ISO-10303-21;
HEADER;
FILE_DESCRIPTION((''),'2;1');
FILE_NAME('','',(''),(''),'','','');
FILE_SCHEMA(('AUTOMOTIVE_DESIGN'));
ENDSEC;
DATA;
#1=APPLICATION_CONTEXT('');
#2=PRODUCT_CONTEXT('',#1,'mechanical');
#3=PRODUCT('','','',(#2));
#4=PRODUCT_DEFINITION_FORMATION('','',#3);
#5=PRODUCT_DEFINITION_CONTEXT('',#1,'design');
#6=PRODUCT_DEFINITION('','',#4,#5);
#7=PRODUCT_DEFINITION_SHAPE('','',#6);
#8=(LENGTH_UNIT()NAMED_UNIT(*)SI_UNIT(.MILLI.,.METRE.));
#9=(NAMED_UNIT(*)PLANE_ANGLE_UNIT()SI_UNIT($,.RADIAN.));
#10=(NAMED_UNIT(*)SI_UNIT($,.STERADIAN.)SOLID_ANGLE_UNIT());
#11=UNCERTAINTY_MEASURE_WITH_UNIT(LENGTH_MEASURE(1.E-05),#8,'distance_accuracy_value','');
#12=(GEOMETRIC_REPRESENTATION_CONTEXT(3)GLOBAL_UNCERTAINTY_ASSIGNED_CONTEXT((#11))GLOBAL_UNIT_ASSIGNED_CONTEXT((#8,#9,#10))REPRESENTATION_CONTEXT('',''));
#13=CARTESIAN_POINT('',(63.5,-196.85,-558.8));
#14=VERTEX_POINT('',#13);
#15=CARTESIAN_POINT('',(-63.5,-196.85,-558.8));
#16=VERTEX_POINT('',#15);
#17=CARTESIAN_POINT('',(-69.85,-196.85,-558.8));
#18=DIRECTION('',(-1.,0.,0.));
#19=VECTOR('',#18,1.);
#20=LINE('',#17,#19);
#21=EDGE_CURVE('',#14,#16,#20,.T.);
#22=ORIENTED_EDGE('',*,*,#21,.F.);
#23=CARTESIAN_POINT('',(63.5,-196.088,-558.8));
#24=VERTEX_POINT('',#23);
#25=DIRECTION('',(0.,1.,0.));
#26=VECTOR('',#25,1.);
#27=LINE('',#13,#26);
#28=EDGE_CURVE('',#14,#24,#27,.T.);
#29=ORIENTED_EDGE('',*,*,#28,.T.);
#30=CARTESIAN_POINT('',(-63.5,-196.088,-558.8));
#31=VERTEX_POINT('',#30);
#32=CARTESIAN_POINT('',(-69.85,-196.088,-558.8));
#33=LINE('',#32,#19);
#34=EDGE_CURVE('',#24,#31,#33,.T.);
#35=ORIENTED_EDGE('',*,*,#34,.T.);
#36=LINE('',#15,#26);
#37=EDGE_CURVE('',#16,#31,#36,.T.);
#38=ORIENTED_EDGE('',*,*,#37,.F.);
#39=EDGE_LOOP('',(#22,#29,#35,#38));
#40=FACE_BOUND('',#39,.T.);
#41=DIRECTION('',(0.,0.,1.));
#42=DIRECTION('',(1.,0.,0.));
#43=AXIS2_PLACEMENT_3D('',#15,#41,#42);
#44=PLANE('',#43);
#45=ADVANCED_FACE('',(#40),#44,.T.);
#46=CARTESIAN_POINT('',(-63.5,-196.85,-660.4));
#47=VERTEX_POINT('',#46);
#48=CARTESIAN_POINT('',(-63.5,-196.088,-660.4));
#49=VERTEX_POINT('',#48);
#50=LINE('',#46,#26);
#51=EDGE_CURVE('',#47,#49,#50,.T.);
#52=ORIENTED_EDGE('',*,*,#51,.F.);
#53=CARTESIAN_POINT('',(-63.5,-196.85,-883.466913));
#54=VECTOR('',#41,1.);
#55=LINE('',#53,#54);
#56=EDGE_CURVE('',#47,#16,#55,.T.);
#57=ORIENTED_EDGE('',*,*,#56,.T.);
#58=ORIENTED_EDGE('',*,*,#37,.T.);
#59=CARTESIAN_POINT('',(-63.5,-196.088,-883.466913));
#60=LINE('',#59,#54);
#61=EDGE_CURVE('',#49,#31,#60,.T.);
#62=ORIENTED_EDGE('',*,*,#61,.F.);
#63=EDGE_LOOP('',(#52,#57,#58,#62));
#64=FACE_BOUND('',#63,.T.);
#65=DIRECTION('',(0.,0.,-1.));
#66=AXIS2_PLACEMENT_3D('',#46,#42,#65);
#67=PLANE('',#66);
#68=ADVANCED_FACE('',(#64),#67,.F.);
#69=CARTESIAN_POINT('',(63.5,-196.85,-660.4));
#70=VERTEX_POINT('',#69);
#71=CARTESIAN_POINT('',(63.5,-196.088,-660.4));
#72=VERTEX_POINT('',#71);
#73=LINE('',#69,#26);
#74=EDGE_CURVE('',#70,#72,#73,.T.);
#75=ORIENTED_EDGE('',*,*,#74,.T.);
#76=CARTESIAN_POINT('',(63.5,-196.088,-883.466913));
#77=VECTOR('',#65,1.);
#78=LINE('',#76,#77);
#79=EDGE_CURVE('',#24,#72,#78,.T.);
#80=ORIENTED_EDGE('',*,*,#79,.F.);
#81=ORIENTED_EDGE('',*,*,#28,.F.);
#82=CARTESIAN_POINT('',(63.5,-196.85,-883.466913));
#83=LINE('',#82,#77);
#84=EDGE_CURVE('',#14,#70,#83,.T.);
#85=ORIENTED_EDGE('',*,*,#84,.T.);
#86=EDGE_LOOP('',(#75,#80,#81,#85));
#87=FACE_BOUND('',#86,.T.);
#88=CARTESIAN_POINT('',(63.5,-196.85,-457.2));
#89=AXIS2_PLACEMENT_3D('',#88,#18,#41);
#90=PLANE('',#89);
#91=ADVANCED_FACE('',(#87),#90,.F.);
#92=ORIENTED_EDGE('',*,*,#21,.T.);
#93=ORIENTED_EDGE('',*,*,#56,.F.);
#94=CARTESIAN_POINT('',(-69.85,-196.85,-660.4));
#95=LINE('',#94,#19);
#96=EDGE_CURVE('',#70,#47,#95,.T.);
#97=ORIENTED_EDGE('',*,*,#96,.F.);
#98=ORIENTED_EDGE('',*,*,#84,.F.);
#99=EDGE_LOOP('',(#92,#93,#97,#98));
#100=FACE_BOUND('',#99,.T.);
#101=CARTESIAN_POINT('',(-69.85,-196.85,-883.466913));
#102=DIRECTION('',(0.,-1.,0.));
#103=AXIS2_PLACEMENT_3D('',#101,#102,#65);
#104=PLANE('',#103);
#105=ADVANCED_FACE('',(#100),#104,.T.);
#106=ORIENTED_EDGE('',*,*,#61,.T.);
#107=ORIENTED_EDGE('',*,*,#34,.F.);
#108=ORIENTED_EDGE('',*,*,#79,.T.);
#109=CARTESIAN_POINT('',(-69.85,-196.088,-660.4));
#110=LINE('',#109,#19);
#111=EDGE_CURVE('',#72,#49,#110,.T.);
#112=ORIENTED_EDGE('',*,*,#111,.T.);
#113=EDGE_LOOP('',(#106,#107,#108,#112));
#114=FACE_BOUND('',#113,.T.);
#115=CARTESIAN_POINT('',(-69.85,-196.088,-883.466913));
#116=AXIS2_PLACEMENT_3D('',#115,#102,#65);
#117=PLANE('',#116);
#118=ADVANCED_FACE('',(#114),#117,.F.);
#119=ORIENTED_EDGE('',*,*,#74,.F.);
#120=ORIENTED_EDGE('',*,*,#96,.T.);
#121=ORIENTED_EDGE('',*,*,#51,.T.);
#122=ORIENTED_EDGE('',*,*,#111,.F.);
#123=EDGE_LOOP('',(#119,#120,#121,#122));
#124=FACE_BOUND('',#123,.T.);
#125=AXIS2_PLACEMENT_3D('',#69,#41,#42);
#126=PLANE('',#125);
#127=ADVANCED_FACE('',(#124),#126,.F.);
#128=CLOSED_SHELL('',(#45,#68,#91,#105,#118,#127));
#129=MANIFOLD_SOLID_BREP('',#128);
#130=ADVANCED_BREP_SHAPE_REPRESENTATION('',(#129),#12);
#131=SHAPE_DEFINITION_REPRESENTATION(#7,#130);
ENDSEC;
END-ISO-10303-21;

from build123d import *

# Parameters (mm, degrees)
BOSS_EXTRUDE1_DEPTH             = 479.425
BOSS_EXTRUDE1_2_DEPTH           = 479.425
SKETCH2_R                       = 1.5875
SKETCH2_W                       = 5.588
SKETCH2_H                       = 25.4
BOSS_EXTRUDE2_DEPTH             = 3.175
SKETCH3_R                       = 1.5875
BOSS_EXTRUDE3_DEPTH             = 3.175
SKETCH4_R                       = 1.5875
BOSS_EXTRUDE4_DEPTH             = 3.175
BOSS_EXTRUDE5_DEPTH             = 3.175
SKETCH6_R                       = 1.5875
BOSS_EXTRUDE6_DEPTH             = 3.175
BOSS_EXTRUDE8_RIGHT_START       = -0.762
SKETCH8_W                       = 3.175
SKETCH8_H                       = 25.4
BOSS_EXTRUDE8_RIGHT_DEPTH       = 5.588
BOSS_EXTRUDE8_LEFT_START        = -189.738
BOSS_EXTRUDE8_LEFT_OUTLINE_W    = 3.175
BOSS_EXTRUDE8_LEFT_OUTLINE_H    = 25.4
BOSS_EXTRUDE8_LEFT_DEPTH        = 5.588
BASE_FLANGE1_DEPTH              = 482.6
BASE_FLANGE2_DEPTH              = 482.6
SKETCH13_W                      = 0.762
SKETCH13_H                      = 63.5
BASE_FLANGE3_DEPTH              = 482.6
HOLE1_START                     = 93
HOLE1_OUTLINE_R                 = 1.7526
HOLE1_DEPTH                     = 3
HOLE1_START_2                   = 88
HOLE1_2_OUTLINE_R               = 1.7526
HOLE1_2_DEPTH                   = 7
SKETCH24_W                      = 1.35255
SKETCH24_H                      = 184.15
F_6_32_TAPPED_HOLE1_AT_2_COUNT  = 2
F_6_32_TAPPED_HOLE1_AT_2_PITCH  = 152.4
F_6_32_TAPPED_HOLE1_AT_3_COUNT  = 2
F_6_32_TAPPED_HOLE1_AT_3_PITCH  = 304.8
F_6_32_TAPPED_HOLE1_AT_4_COUNT  = 2
F_6_32_TAPPED_HOLE1_AT_4_PITCH  = 457.2
HOLE2_START                     = -96
HOLE2_OUTLINE_R                 = 1.7526
HOLE2_DEPTH                     = 192
HOLE2_START_2                   = -95
HOLE2_2_OUTLINE_R               = 1.7526
HOLE2_2_DEPTH                   = 7
HOLE2_START_3                   = 88
HOLE2_3_OUTLINE_R               = 1.7526
HOLE2_3_DEPTH                   = 7
SKETCH26_W                      = 1.35255
SKETCH26_H                      = 184.15
F_6_32_TAPPED_HOLE2_AT_2_COUNT  = 2
F_6_32_TAPPED_HOLE2_AT_2_PITCH  = 50.8
F_6_32_TAPPED_HOLE2_AT_3_COUNT  = 2
F_6_32_TAPPED_HOLE2_AT_3_PITCH  = 101.6
F_6_32_TAPPED_HOLE2_AT_4_COUNT  = 2
F_6_32_TAPPED_HOLE2_AT_4_PITCH  = 152.4
F_6_32_TAPPED_HOLE2_AT_5_COUNT  = 2
F_6_32_TAPPED_HOLE2_AT_5_PITCH  = 203.2
F_6_32_TAPPED_HOLE2_AT_6_COUNT  = 2
F_6_32_TAPPED_HOLE2_AT_6_PITCH  = 254
F_6_32_TAPPED_HOLE2_AT_7_COUNT  = 2
F_6_32_TAPPED_HOLE2_AT_7_PITCH  = 304.8
F_6_32_TAPPED_HOLE2_AT_8_COUNT  = 2
F_6_32_TAPPED_HOLE2_AT_8_PITCH  = 355.6
F_6_32_TAPPED_HOLE2_AT_9_COUNT  = 2
F_6_32_TAPPED_HOLE2_AT_9_PITCH  = 406.4
F_6_32_TAPPED_HOLE2_AT_10_COUNT = 2
F_6_32_TAPPED_HOLE2_AT_10_PITCH = 457.2
SKETCH21_W                      = 1.35255
SKETCH21_H                      = 3.176
F_6_32_TAPPED_HOLE3_AT_2_COUNT  = 2
F_6_32_TAPPED_HOLE3_AT_2_PITCH  = 25.4
F_6_32_TAPPED_HOLE3_AT_3_COUNT  = 2
F_6_32_TAPPED_HOLE3_AT_3_PITCH  = 50.8
F_6_32_TAPPED_HOLE3_AT_4_COUNT  = 2
F_6_32_TAPPED_HOLE3_AT_4_PITCH  = 76.2
F_6_32_TAPPED_HOLE3_AT_5_COUNT  = 2
F_6_32_TAPPED_HOLE3_AT_5_PITCH  = 101.6
F_6_32_TAPPED_HOLE3_AT_6_COUNT  = 2
F_6_32_TAPPED_HOLE3_AT_6_PITCH  = 127
F_6_32_TAPPED_HOLE3_AT_7_COUNT  = 2
F_6_32_TAPPED_HOLE3_AT_7_PITCH  = 203.2
F_6_32_TAPPED_HOLE3_AT_8_COUNT  = 2
F_6_32_TAPPED_HOLE3_AT_8_PITCH  = 152.4
F_6_32_TAPPED_HOLE3_AT_9_COUNT  = 2
F_6_32_TAPPED_HOLE3_AT_9_PITCH  = 177.8
F_6_32_TAPPED_HOLE3_AT_10_COUNT = 2
F_6_32_TAPPED_HOLE3_AT_10_PITCH = 254
F_6_32_TAPPED_HOLE3_AT_11_COUNT = 2
F_6_32_TAPPED_HOLE3_AT_11_PITCH = 279.4
F_6_32_TAPPED_HOLE3_AT_12_COUNT = 2
F_6_32_TAPPED_HOLE3_AT_12_PITCH = 304.8
F_6_32_TAPPED_HOLE3_AT_13_COUNT = 2
F_6_32_TAPPED_HOLE3_AT_13_PITCH = 330.2
F_6_32_TAPPED_HOLE3_AT_14_COUNT = 2
F_6_32_TAPPED_HOLE3_AT_14_PITCH = 355.6
F_6_32_TAPPED_HOLE3_AT_15_COUNT = 2
F_6_32_TAPPED_HOLE3_AT_15_PITCH = 381
F_6_32_TAPPED_HOLE3_AT_16_COUNT = 2
F_6_32_TAPPED_HOLE3_AT_16_PITCH = 406.4
F_6_32_TAPPED_HOLE3_AT_17_COUNT = 2
F_6_32_TAPPED_HOLE3_AT_17_PITCH = 431.8
MIRROR1_COPY_1_SKETCH_W         = 1.35255
MIRROR1_COPY_1_SKETCH_H         = 3.176
MIRROR1_COPY_2_SKETCH_W         = 1.35255
MIRROR1_COPY_2_SKETCH_H         = 3.176
MIRROR1_COPY_3_SKETCH_W         = 1.35255
MIRROR1_COPY_3_SKETCH_H         = 3.176
MIRROR1_COPY_4_SKETCH_W         = 1.35255
MIRROR1_COPY_4_SKETCH_H         = 3.176
MIRROR1_COPY_5_SKETCH_W         = 1.35255
MIRROR1_COPY_5_SKETCH_H         = 3.176
MIRROR1_COPY_6_SKETCH_W         = 1.35255
MIRROR1_COPY_6_SKETCH_H         = 3.176
MIRROR1_COPY_7_SKETCH_W         = 1.35255
MIRROR1_COPY_7_SKETCH_H         = 3.176
MIRROR1_COPY_8_SKETCH_W         = 1.35255
MIRROR1_COPY_8_SKETCH_H         = 3.176
MIRROR1_COPY_9_SKETCH_W         = 1.35255
MIRROR1_COPY_9_SKETCH_H         = 3.176
MIRROR1_COPY_10_SKETCH_W        = 1.35255
MIRROR1_COPY_10_SKETCH_H        = 3.176
MIRROR1_COPY_11_SKETCH_W        = 1.35255
MIRROR1_COPY_11_SKETCH_H        = 3.176
MIRROR1_COPY_12_SKETCH_W        = 1.35255
MIRROR1_COPY_12_SKETCH_H        = 3.176
MIRROR1_COPY_13_SKETCH_W        = 1.35255
MIRROR1_COPY_13_SKETCH_H        = 3.176
MIRROR1_COPY_14_SKETCH_W        = 1.35255
MIRROR1_COPY_14_SKETCH_H        = 3.176
MIRROR1_COPY_15_SKETCH_W        = 1.35255
MIRROR1_COPY_15_SKETCH_H        = 3.176
MIRROR1_COPY_16_SKETCH_W        = 1.35255
MIRROR1_COPY_16_SKETCH_H        = 3.176
SKETCH9_R                       = 1.5875
NOSECONE_BASE_DEPTH             = 3.175
NOSECONE_BASE_DRAFT             = 20
SPLIT1_START                    = -558.8
SPLIT1_DEPTH                    = 361.95
SPLIT1_START_2                  = -679.45
SPLIT1_2_DEPTH                  = 120.65
SPLIT1_3_OUTLINE_W              = 127
SPLIT1_3_OUTLINE_H              = 0.762
SPLIT1_3_DEPTH                  = 19.05


with BuildPart() as part:
    # Sketch1 → Boss-Extrude1 (new body)
    with BuildSketch(Plane.XY.offset(-196.85)):
        Polygon((88.9, -136.525), (85.725, -136.525), (85.725, -114.3), (63.5, -114.3), (63.5, -111.125), (88.9, -111.125), align=None)
    extrude(amount=-BOSS_EXTRUDE1_DEPTH)

    # Sketch24 → #6-32 Tapped Hole1 (revolve, cut)
    with BuildSketch(Plane(origin=(88.9, -117.475, -209.55), x_dir=(0, 0, -1), z_dir=(0, 1, 0))):
        with Locations((0.676275, 92.075)):
            Rectangle(SKETCH24_W, SKETCH24_H)
    f_6_32_tapped_hole1 = revolve(axis=Axis((95.25, -117.475, -209.55), (-1, 0, 0)), mode=Mode.SUBTRACT)

    # #6-32 Tapped Hole1 at 2: #6-32 Tapped Hole1 ×2
    with Locations(*[(0, 0, -i * F_6_32_TAPPED_HOLE1_AT_2_PITCH) for i in range(1, F_6_32_TAPPED_HOLE1_AT_2_COUNT)]):
        add(f_6_32_tapped_hole1, mode=Mode.SUBTRACT)

    # #6-32 Tapped Hole1 at 3: #6-32 Tapped Hole1 ×2
    with Locations(*[(0, 0, -i * F_6_32_TAPPED_HOLE1_AT_3_PITCH) for i in range(1, F_6_32_TAPPED_HOLE1_AT_3_COUNT)]):
        add(f_6_32_tapped_hole1, mode=Mode.SUBTRACT)

    # #6-32 Tapped Hole1 at 4: #6-32 Tapped Hole1 ×2
    with Locations(*[(0, 0, -i * F_6_32_TAPPED_HOLE1_AT_4_PITCH) for i in range(1, F_6_32_TAPPED_HOLE1_AT_4_COUNT)]):
        add(f_6_32_tapped_hole1, mode=Mode.SUBTRACT)


with BuildPart() as body_2:
    # Sketch1 → Boss-Extrude1 2 (new body)
    with BuildSketch(Plane.XY.offset(-196.85)):
        Polygon((-63.5, -114.3), (-63.5, -111.125), (-88.9, -111.125), (-88.9, -136.525), (-85.725, -136.525), (-85.725, -114.3), align=None)
    extrude(amount=-BOSS_EXTRUDE1_2_DEPTH)


with BuildPart() as body_3:
    # Sketch2 → Boss-Extrude2 (new body)
    # profile 1 of 3: a face of its own
    with BuildSketch(Plane.XY.offset(-196.85)):
        with BuildLine():
            Line((94.488, -171.45), (94.488, -136.525))
            Line((94.488, -136.525), (88.9, -136.525))
            Line((88.9, -136.525), (85.725, -136.525))
            Line((85.725, -136.525), (85.725, -114.3))
            Line((85.725, -114.3), (63.5, -114.3))
            Line((63.5, -114.3), (63.5, -111.125))
            Line((63.5, -111.125), (88.9, -111.125))
            Line((88.9, -111.125), (88.9, -85.725))
            Line((88.9, -85.725), (88.9, -60.325))
            Line((88.9, -60.325), (94.488, -60.325))
            Line((94.488, -60.325), (94.488, -25.4))
            ThreePointArc((94.488, -25.4), (87.271696875, -7.978303125), (69.85, -0.762))
            Line((69.85, -0.762), (-69.85, -0.762))
            ThreePointArc((-69.85, -0.762), (-87.271696875, -7.978303125), (-94.488, -25.4))
            Line((-94.488, -25.4), (-94.488, -60.325))
            Line((-94.488, -60.325), (-88.9, -60.325))
            Line((-88.9, -60.325), (-88.9, -85.725))
            Line((-88.9, -85.725), (-94.488, -85.725))
            Line((-94.488, -85.725), (-94.488, -111.125))
            Line((-94.488, -111.125), (-88.9, -111.125))
            Line((-88.9, -111.125), (-63.5, -111.125))
            Line((-63.5, -111.125), (-63.5, -114.3))
            Line((-63.5, -114.3), (-85.725, -114.3))
            Line((-85.725, -114.3), (-85.725, -136.525))
            Line((-85.725, -136.525), (-88.9, -136.525))
            Line((-88.9, -136.525), (-94.488, -136.525))
            Line((-94.488, -136.525), (-94.488, -171.45))
            ThreePointArc((-94.488, -171.45), (-87.271696875, -188.871696875), (-69.85, -196.088))
            Line((-69.85, -196.088), (69.85, -196.088))
            ThreePointArc((69.85, -196.088), (87.271696875, -188.871696875), (94.488, -171.45))
        make_face()
        with Locations((-19.05, -155.575)):
            Circle(SKETCH2_R, mode=Mode.SUBTRACT)
        with Locations((-19.05, -127)):
            Circle(SKETCH2_R, mode=Mode.SUBTRACT)
        with Locations((19.05, -155.575)):
            Circle(SKETCH2_R, mode=Mode.SUBTRACT)
        with Locations((19.05, -127)):
            Circle(SKETCH2_R, mode=Mode.SUBTRACT)
        with Locations((-83.82, -84.836714101)):
            Circle(SKETCH2_R, mode=Mode.SUBTRACT)
        with BuildLine():
            ThreePointArc((-64.77, -88.9), (-68.362102448, -87.412102448), (-69.85, -83.82))
            Line((-69.85, -83.82), (-69.85, -54.309589078))
            ThreePointArc((-69.85, -54.309589078), (-66.714031836, -49.616281053), (-61.177897552, -50.71748663))
            Line((-61.177897552, -50.71748663), (-31.66748663, -80.227897552))
            ThreePointArc((-31.66748663, -80.227897552), (-30.566281053, -85.764031836), (-35.259589078, -88.9))
            Line((-35.259589078, -88.9), (-64.77, -88.9))
        make_face(mode=Mode.SUBTRACT)
        with BuildLine():
            ThreePointArc((-50.88251337, -34.072102448), (-51.983718947, -28.535968164), (-47.290410922, -25.4))
            Line((-47.290410922, -25.4), (47.290410922, -25.4))
            ThreePointArc((47.290410922, -25.4), (51.983718947, -28.535968164), (50.88251337, -34.072102448))
            Line((50.88251337, -34.072102448), (3.592102448, -81.36251337))
            ThreePointArc((3.592102448, -81.36251337), (0, -82.850410922), (-3.592102448, -81.36251337))
            Line((-3.592102448, -81.36251337), (-50.88251337, -34.072102448))
        make_face(mode=Mode.SUBTRACT)
        with Locations((-19.05, -12.7)):
            Circle(SKETCH2_R, mode=Mode.SUBTRACT)
        with BuildLine():
            Line((64.77, -88.9), (35.259589078, -88.9))
            ThreePointArc((35.259589078, -88.9), (30.566281053, -85.764031836), (31.66748663, -80.227897552))
            Line((31.66748663, -80.227897552), (61.177897552, -50.71748663))
            ThreePointArc((61.177897552, -50.71748663), (66.714031836, -49.616281053), (69.85, -54.309589078))
            Line((69.85, -54.309589078), (69.85, -83.82))
            ThreePointArc((69.85, -83.82), (68.362102448, -87.412102448), (64.77, -88.9))
        make_face(mode=Mode.SUBTRACT)
        with Locations((19.05, -12.7)):
            Circle(SKETCH2_R, mode=Mode.SUBTRACT)
    # profile 2 of 3: a face of its own
    with BuildSketch(Plane.XY.offset(-196.85)):
        with Locations((91.694, -98.425)):
            Rectangle(SKETCH2_W, SKETCH2_H)
    # profile 3 of 3: a face of its own
    with BuildSketch(Plane.XY.offset(-196.85)):
        with BuildLine():
            Line((94.488, -171.45), (94.488, -136.525))
            Line((94.488, -136.525), (88.9, -136.525))
            Line((88.9, -136.525), (85.725, -136.525))
            Line((85.725, -136.525), (85.725, -114.3))
            Line((85.725, -114.3), (63.5, -114.3))
            Line((63.5, -114.3), (63.5, -111.125))
            Line((63.5, -111.125), (88.9, -111.125))
            Line((88.9, -111.125), (88.9, -85.725))
            Line((88.9, -85.725), (88.9, -60.325))
            Line((88.9, -60.325), (94.488, -60.325))
            Line((94.488, -60.325), (94.488, -25.4))
            ThreePointArc((94.488, -25.4), (87.271696875, -7.978303125), (69.85, -0.762))
            Line((69.85, -0.762), (-69.85, -0.762))
            ThreePointArc((-69.85, -0.762), (-87.271696875, -7.978303125), (-94.488, -25.4))
            Line((-94.488, -25.4), (-94.488, -60.325))
            Line((-94.488, -60.325), (-88.9, -60.325))
            Line((-88.9, -60.325), (-88.9, -85.725))
            Line((-88.9, -85.725), (-94.488, -85.725))
            Line((-94.488, -85.725), (-94.488, -111.125))
            Line((-94.488, -111.125), (-88.9, -111.125))
            Line((-88.9, -111.125), (-63.5, -111.125))
            Line((-63.5, -111.125), (-63.5, -114.3))
            Line((-63.5, -114.3), (-85.725, -114.3))
            Line((-85.725, -114.3), (-85.725, -136.525))
            Line((-85.725, -136.525), (-88.9, -136.525))
            Line((-88.9, -136.525), (-94.488, -136.525))
            Line((-94.488, -136.525), (-94.488, -171.45))
            ThreePointArc((-94.488, -171.45), (-87.271696875, -188.871696875), (-69.85, -196.088))
            Line((-69.85, -196.088), (69.85, -196.088))
            ThreePointArc((69.85, -196.088), (87.271696875, -188.871696875), (94.488, -171.45))
        make_face()
        with Locations((-19.05, -155.575)):
            Circle(SKETCH2_R, mode=Mode.SUBTRACT)
        with Locations((-19.05, -127)):
            Circle(SKETCH2_R, mode=Mode.SUBTRACT)
        with Locations((19.05, -155.575)):
            Circle(SKETCH2_R, mode=Mode.SUBTRACT)
        with Locations((19.05, -127)):
            Circle(SKETCH2_R, mode=Mode.SUBTRACT)
        with Locations((-83.82, -84.836714101)):
            Circle(SKETCH2_R, mode=Mode.SUBTRACT)
        with BuildLine():
            ThreePointArc((-64.77, -88.9), (-68.362102448, -87.412102448), (-69.85, -83.82))
            Line((-69.85, -83.82), (-69.85, -54.309589078))
            ThreePointArc((-69.85, -54.309589078), (-66.714031836, -49.616281053), (-61.177897552, -50.71748663))
            Line((-61.177897552, -50.71748663), (-31.66748663, -80.227897552))
            ThreePointArc((-31.66748663, -80.227897552), (-30.566281053, -85.764031836), (-35.259589078, -88.9))
            Line((-35.259589078, -88.9), (-64.77, -88.9))
        make_face(mode=Mode.SUBTRACT)
        with BuildLine():
            ThreePointArc((-50.88251337, -34.072102448), (-51.983718947, -28.535968164), (-47.290410922, -25.4))
            Line((-47.290410922, -25.4), (47.290410922, -25.4))
            ThreePointArc((47.290410922, -25.4), (51.983718947, -28.535968164), (50.88251337, -34.072102448))
            Line((50.88251337, -34.072102448), (3.592102448, -81.36251337))
            ThreePointArc((3.592102448, -81.36251337), (0, -82.850410922), (-3.592102448, -81.36251337))
            Line((-3.592102448, -81.36251337), (-50.88251337, -34.072102448))
        make_face(mode=Mode.SUBTRACT)
        with Locations((-19.05, -12.7)):
            Circle(SKETCH2_R, mode=Mode.SUBTRACT)
        with BuildLine():
            Line((64.77, -88.9), (35.259589078, -88.9))
            ThreePointArc((35.259589078, -88.9), (30.566281053, -85.764031836), (31.66748663, -80.227897552))
            Line((31.66748663, -80.227897552), (61.177897552, -50.71748663))
            ThreePointArc((61.177897552, -50.71748663), (66.714031836, -49.616281053), (69.85, -54.309589078))
            Line((69.85, -54.309589078), (69.85, -83.82))
            ThreePointArc((69.85, -83.82), (68.362102448, -87.412102448), (64.77, -88.9))
        make_face(mode=Mode.SUBTRACT)
        with Locations((19.05, -12.7)):
            Circle(SKETCH2_R, mode=Mode.SUBTRACT)
    extrude(amount=-BOSS_EXTRUDE2_DEPTH)


with BuildPart() as body_4:
    # Sketch3 → Boss-Extrude3 (new body)
    with BuildSketch(Plane.XY.offset(-450.85)):
        Polygon((88.9, -111.125), (63.5, -111.125), (63.5, -114.3), (85.725, -114.3), (85.725, -136.525), (-85.725, -136.525), (-85.725, -114.3), (-63.5, -114.3), (-63.5, -111.125), (-88.9, -111.125), (-94.488, -111.125), (-94.488, -85.725), (-88.9, -85.725), (-88.9, -60.325), (88.9, -60.325), (88.9, -85.725), (94.488, -85.725), (94.488, -111.125), align=None)
        with Locations((-83.82, -84.836714101)):
            Circle(SKETCH3_R, mode=Mode.SUBTRACT)
        with BuildLine():
            Line((-25.4, -85.725), (25.4, -85.725))
            ThreePointArc((25.4, -85.725), (38.1, -98.425), (25.4, -111.125))
            Line((25.4, -111.125), (-25.4, -111.125))
            ThreePointArc((-25.4, -111.125), (-38.1, -98.425), (-25.4, -85.725))
        make_face(mode=Mode.SUBTRACT)
    extrude(amount=BOSS_EXTRUDE3_DEPTH)


with BuildPart() as body_5:
    # Sketch4 → Boss-Extrude4 (new body)
    with BuildSketch(Plane.XY.offset(-679.45)):
        with BuildLine():
            Line((88.9, -136.525), (88.9, -111.125))
            Line((88.9, -111.125), (94.488, -111.125))
            Line((94.488, -111.125), (94.488, -85.725))
            Line((94.488, -85.725), (88.9, -85.725))
            Line((88.9, -85.725), (88.9, -60.325))
            Line((88.9, -60.325), (94.488, -60.325))
            Line((94.488, -60.325), (94.488, -25.4))
            ThreePointArc((94.488, -25.4), (87.271696875, -7.978303125), (69.85, -0.762))
            Line((69.85, -0.762), (-69.85, -0.762))
            ThreePointArc((-69.85, -0.762), (-87.271696875, -7.978303125), (-94.488, -25.4))
            Line((-94.488, -25.4), (-94.488, -60.325))
            Line((-94.488, -60.325), (-88.9, -60.325))
            Line((-88.9, -60.325), (-88.9, -85.725))
            Line((-88.9, -85.725), (-94.488, -85.725))
            Line((-94.488, -85.725), (-94.488, -111.125))
            Line((-94.488, -111.125), (-88.9, -111.125))
            Line((-88.9, -111.125), (-88.9, -136.525))
            Line((-88.9, -136.525), (-94.488, -136.525))
            Line((-94.488, -136.525), (-94.488, -171.45))
            ThreePointArc((-94.488, -171.45), (-87.271696875, -188.871696875), (-69.85, -196.088))
            Line((-69.85, -196.088), (69.85, -196.088))
            ThreePointArc((69.85, -196.088), (87.271696875, -188.871696875), (94.488, -171.45))
            Line((94.488, -171.45), (94.488, -136.525))
            Line((94.488, -136.525), (88.9, -136.525))
        make_face()
        with Locations((25.4, -184.15)):
            Circle(SKETCH4_R, mode=Mode.SUBTRACT)
        with Locations(Location((-25.4, -184.15, 0), (0, 0, 180))):
            Circle(SKETCH4_R, mode=Mode.SUBTRACT)
        with Locations(Location((-63.1655201, -45.2492872, 0), (0, 0, 180))):
            Circle(SKETCH4_R, mode=Mode.SUBTRACT)
        with Locations(Location((-63.1655201, -133.35, 0), (0, 0, 180))):
            Circle(SKETCH4_R, mode=Mode.SUBTRACT)
        with Locations((63.1655201, -45.2492872)):
            Circle(SKETCH4_R, mode=Mode.SUBTRACT)
        with Locations((63.1655201, -133.35)):
            Circle(SKETCH4_R, mode=Mode.SUBTRACT)
        with Locations((-83.82, -84.836714101)):
            Circle(SKETCH4_R, mode=Mode.SUBTRACT)
        with BuildLine():
            Line((-3.271622644, -113.630048555), (-49.273936974, -152.356965567))
            ThreePointArc((-49.273936974, -152.356965567), (-50.774552528, -157.984513496), (-46.00231433, -161.323208647))
            Line((-46.00231433, -161.323208647), (46.00231433, -161.323208647))
            ThreePointArc((46.00231433, -161.323208647), (50.774552528, -157.984513496), (49.273936974, -152.356965567))
            Line((49.273936974, -152.356965567), (3.271622644, -113.630048555))
            ThreePointArc((3.271622644, -113.630048555), (0, -112.436291635), (-3.271622644, -113.630048555))
        make_face(mode=Mode.SUBTRACT)
        with BuildLine():
            Line((-46.00231433, -35.526791353), (46.00231433, -35.526791353))
            ThreePointArc((46.00231433, -35.526791353), (50.774552528, -38.865486504), (49.273936974, -44.493034433))
            Line((49.273936974, -44.493034433), (3.271622644, -83.219951445))
            ThreePointArc((3.271622644, -83.219951445), (0, -84.413708365), (-3.271622644, -83.219951445))
            Line((-3.271622644, -83.219951445), (-49.273936974, -44.493034433))
            ThreePointArc((-49.273936974, -44.493034433), (-50.774552528, -38.865486504), (-46.00231433, -35.526791353))
        make_face(mode=Mode.SUBTRACT)
        with BuildLine():
            Line((25.440586882, -89.45875692), (54.813897456, -64.730919255))
            ThreePointArc((54.813897456, -64.730919255), (60.228713625, -64.011391876), (63.1655201, -68.617162335))
            Line((63.1655201, -68.617162335), (63.1655201, -93.345))
            ThreePointArc((63.1655201, -93.345), (61.677622548, -96.937102448), (58.0855201, -98.425))
            Line((58.0855201, -98.425), (28.712209526, -98.425))
            ThreePointArc((28.712209526, -98.425), (23.939971328, -95.086304849), (25.440586882, -89.45875692))
        make_face(mode=Mode.SUBTRACT)
        with BuildLine():
            Line((-63.1655201, -68.617162335), (-63.1655201, -93.345))
            ThreePointArc((-63.1655201, -93.345), (-61.677622548, -96.937102448), (-58.0855201, -98.425))
            Line((-58.0855201, -98.425), (-28.712209526, -98.425))
            ThreePointArc((-28.712209526, -98.425), (-23.939971328, -95.086304849), (-25.440586882, -89.45875692))
            Line((-25.440586882, -89.45875692), (-54.813897456, -64.730919255))
            ThreePointArc((-54.813897456, -64.730919255), (-60.228713625, -64.011391876), (-63.1655201, -68.617162335))
        make_face(mode=Mode.SUBTRACT)
    extrude(amount=BOSS_EXTRUDE4_DEPTH)


with BuildPart() as body_6:
    # Sketch5 → Boss-Extrude5 (new body)
    with BuildSketch(Plane.XY.offset(-450.85)):
        with BuildLine():
            Line((69.85, -0.762), (69.85, -1.203250218))
            ThreePointArc((69.85, -1.203250218), (83.566, -10.002068321), (88.9, -25.4))
            Line((88.9, -25.4), (88.9, -60.325))
            Line((88.9, -60.325), (94.488, -60.325))
            Line((94.488, -60.325), (94.488, -25.4))
            ThreePointArc((94.488, -25.4), (87.271696875, -7.978303125), (69.85, -0.762))
        make_face()
    extrude(amount=-BOSS_EXTRUDE5_DEPTH)


with BuildPart() as body_7:
    # Sketch6 → Boss-Extrude6 (new body)
    with BuildSketch(Plane.XY.offset(-450.85)):
        with BuildLine():
            Line((-94.488, -25.4), (-94.488, -59.98389124))
            ThreePointArc((-94.488, -59.98389124), (-66.117668406, -64.389306336), (-57.695875243, -91.836652233))
            Line((-57.695875243, -91.836652233), (-61.777576564, -96.701034447))
            Line((-61.777576564, -96.701034447), (-80.554638943, -80.94520833))
            ThreePointArc((-80.554638943, -80.94520833), (-87.711505771, -81.571353044), (-87.085361057, -88.728219872))
            Line((-87.085361057, -88.728219872), (-68.308298678, -104.484045989))
            Line((-68.308298678, -104.484045989), (-58.302651908, -106.248311474))
            Line((-58.302651908, -106.248311474), (-50.955589529, -97.492423489))
            ThreePointArc((-50.955589529, -97.492423489), (-45.450014055, -78.708264177), (-55.529491864, -61.928510619))
            Line((-55.529491864, -61.928510619), (-78.407186312, -45.704558542))
            ThreePointArc((-78.407186312, -45.704558542), (-88.452181648, -20.699611978), (-69.85, -1.203250218))
            Line((-69.85, -1.203250218), (-69.85, -0.762))
            ThreePointArc((-69.85, -0.762), (-87.271696875, -7.978303125), (-94.488, -25.4))
        make_face()
        with Locations((-83.82, -84.836714101)):
            Circle(SKETCH6_R, mode=Mode.SUBTRACT)
    extrude(amount=-BOSS_EXTRUDE6_DEPTH)


with BuildPart() as body_8:
    # Sketch8 → Boss-Extrude8-Right (new body)
    with BuildSketch(Plane(origin=(95.25, 0, 0), x_dir=(0, 0, -1), z_dir=(1, 0, 0)).offset(BOSS_EXTRUDE8_RIGHT_START)):
        Polygon((196.85, -60.325), (679.45, -60.325), (679.45, -85.725), (676.275, -85.725), (676.275, -111.125), (679.45, -111.125), (679.45, -136.525), (196.85, -136.525), (196.85, -111.125), (200.025, -111.125), (200.025, -85.725), (196.85, -85.725), align=None)
        with Locations((449.2625, -98.425)):
            Rectangle(SKETCH8_W, SKETCH8_H, mode=Mode.SUBTRACT)
    extrude(amount=-BOSS_EXTRUDE8_RIGHT_DEPTH)

    # Hole1 2 outline → Hole1 2 (cut)
    with BuildSketch(Plane.YZ.offset(HOLE1_START_2)):
        with Locations((-117.475, -666.75)):
            Circle(HOLE1_2_OUTLINE_R)
        with Locations((-117.475, -514.35)):
            Circle(HOLE1_2_OUTLINE_R)
        with Locations((-117.475, -361.95)):
            Circle(HOLE1_2_OUTLINE_R)
        with Locations((-117.475, -209.55)):
            Circle(HOLE1_2_OUTLINE_R)
    extrude(amount=HOLE1_2_DEPTH, mode=Mode.SUBTRACT)

    # Hole2 3 outline → Hole2 3 (cut)
    with BuildSketch(Plane.YZ.offset(HOLE2_START_3)):
        with Locations((-130.175, -666.75)):
            Circle(HOLE2_3_OUTLINE_R)
        with Locations((-130.175, -615.95)):
            Circle(HOLE2_3_OUTLINE_R)
        with Locations((-130.175, -565.15)):
            Circle(HOLE2_3_OUTLINE_R)
        with Locations((-130.175, -514.35)):
            Circle(HOLE2_3_OUTLINE_R)
        with Locations((-130.175, -463.55)):
            Circle(HOLE2_3_OUTLINE_R)
        with Locations((-130.175, -412.75)):
            Circle(HOLE2_3_OUTLINE_R)
        with Locations((-130.175, -361.95)):
            Circle(HOLE2_3_OUTLINE_R)
        with Locations((-130.175, -311.15)):
            Circle(HOLE2_3_OUTLINE_R)
        with Locations((-130.175, -260.35)):
            Circle(HOLE2_3_OUTLINE_R)
        with Locations((-130.175, -209.55)):
            Circle(HOLE2_3_OUTLINE_R)
    extrude(amount=HOLE2_3_DEPTH, mode=Mode.SUBTRACT)


with BuildPart() as body_9:
    # Boss-Extrude8-Left: read off the stored shape, not the designer's step
    # Boss-Extrude8-Left outline → Boss-Extrude8-Left (new body)
    with BuildSketch(Plane(origin=(95.25, 0, 0), x_dir=(0, 0, -1), z_dir=(1, 0, 0)).offset(BOSS_EXTRUDE8_LEFT_START)):
        Polygon((196.85, -60.325), (196.85, -85.725), (200.025, -85.725), (200.025, -111.125), (196.85, -111.125), (196.85, -136.525), (679.45, -136.525), (679.45, -111.125), (676.275, -111.125), (676.275, -85.725), (679.45, -85.725), (679.45, -60.325), align=None)
        with Locations((449.2625, -98.425)):
            Rectangle(BOSS_EXTRUDE8_LEFT_OUTLINE_W, BOSS_EXTRUDE8_LEFT_OUTLINE_H, mode=Mode.SUBTRACT)
    extrude(amount=BOSS_EXTRUDE8_LEFT_DEPTH)

    # Hole2 2 outline → Hole2 2 (cut)
    with BuildSketch(Plane.YZ.offset(HOLE2_START_2)):
        with Locations((-130.175, -666.75)):
            Circle(HOLE2_2_OUTLINE_R)
        with Locations((-130.175, -615.95)):
            Circle(HOLE2_2_OUTLINE_R)
        with Locations((-130.175, -565.15)):
            Circle(HOLE2_2_OUTLINE_R)
        with Locations((-130.175, -514.35)):
            Circle(HOLE2_2_OUTLINE_R)
        with Locations((-130.175, -463.55)):
            Circle(HOLE2_2_OUTLINE_R)
        with Locations((-130.175, -412.75)):
            Circle(HOLE2_2_OUTLINE_R)
        with Locations((-130.175, -361.95)):
            Circle(HOLE2_2_OUTLINE_R)
        with Locations((-130.175, -311.15)):
            Circle(HOLE2_2_OUTLINE_R)
        with Locations((-130.175, -260.35)):
            Circle(HOLE2_2_OUTLINE_R)
        with Locations((-130.175, -209.55)):
            Circle(HOLE2_2_OUTLINE_R)
    extrude(amount=HOLE2_2_DEPTH, mode=Mode.SUBTRACT)


with BuildPart() as body_10:
    # Base-Flange1: sheet metal written as solids
    # Sketch11 → Base-Flange1 (new body)
    with BuildSketch(Plane.XY.offset(-196.85)):
        with BuildLine():
            Line((95.25, -123.825), (95.25, -25.4))
            ThreePointArc((95.25, -25.4), (87.810512242, -7.439487758), (69.85, 0))
            Line((69.85, 0), (-69.85, 0))
            ThreePointArc((-69.85, 0), (-87.810512242, -7.439487758), (-95.25, -25.4))
            Line((-95.25, -25.4), (-95.25, -60.325))
            Line((-95.25, -60.325), (-94.488, -60.325))
            Line((-94.488, -60.325), (-94.488, -25.4))
            ThreePointArc((-94.488, -25.4), (-87.271696875, -7.978303125), (-69.85, -0.762))
            Line((-69.85, -0.762), (69.85, -0.762))
            ThreePointArc((69.85, -0.762), (87.271696875, -7.978303125), (94.488, -25.4))
            Line((94.488, -25.4), (94.488, -123.825))
            Line((94.488, -123.825), (95.25, -123.825))
        make_face()
    extrude(amount=-BASE_FLANGE1_DEPTH)

    # Hole1: read off the stored shape, not the designer's step
    # Hole1 outline → Hole1 (cut)
    with BuildSketch(Plane.YZ.offset(HOLE1_START)):
        with Locations((-117.475, -666.75)):
            Circle(HOLE1_OUTLINE_R)
        with Locations((-117.475, -514.35)):
            Circle(HOLE1_OUTLINE_R)
        with Locations((-117.475, -361.95)):
            Circle(HOLE1_OUTLINE_R)
        with Locations((-117.475, -209.55)):
            Circle(HOLE1_OUTLINE_R)
    extrude(amount=HOLE1_DEPTH, mode=Mode.SUBTRACT)


with BuildPart() as body_11:
    # Base-Flange2: sheet metal written as solids
    # Sketch12 → Base-Flange2 (new body)
    with BuildSketch(Plane.XY.offset(-196.85)):
        with BuildLine():
            Line((-95.25, -123.825), (-95.25, -171.45))
            ThreePointArc((-95.25, -171.45), (-87.810512242, -189.410512242), (-69.85, -196.85))
            Line((-69.85, -196.85), (69.85, -196.85))
            ThreePointArc((69.85, -196.85), (87.810512242, -189.410512242), (95.25, -171.45))
            Line((95.25, -171.45), (95.25, -123.825))
            Line((95.25, -123.825), (94.488, -123.825))
            Line((94.488, -123.825), (94.488, -171.45))
            ThreePointArc((94.488, -171.45), (87.271696875, -188.871696875), (69.85, -196.088))
            Line((69.85, -196.088), (-69.85, -196.088))
            ThreePointArc((-69.85, -196.088), (-87.271696875, -188.871696875), (-94.488, -171.45))
            Line((-94.488, -171.45), (-94.488, -123.825))
            Line((-94.488, -123.825), (-95.25, -123.825))
        make_face()
    extrude(amount=-BASE_FLANGE2_DEPTH)

    # Hole2: read off the stored shape, not the designer's step
    # Hole2 outline → Hole2 (cut)
    with BuildSketch(Plane.YZ.offset(HOLE2_START)):
        with Locations((-130.175, -666.75)):
            Circle(HOLE2_OUTLINE_R)
        with Locations((-130.175, -615.95)):
            Circle(HOLE2_OUTLINE_R)
        with Locations((-130.175, -565.15)):
            Circle(HOLE2_OUTLINE_R)
        with Locations((-130.175, -514.35)):
            Circle(HOLE2_OUTLINE_R)
        with Locations((-130.175, -463.55)):
            Circle(HOLE2_OUTLINE_R)
        with Locations((-130.175, -412.75)):
            Circle(HOLE2_OUTLINE_R)
        with Locations((-130.175, -361.95)):
            Circle(HOLE2_OUTLINE_R)
        with Locations((-130.175, -311.15)):
            Circle(HOLE2_OUTLINE_R)
        with Locations((-130.175, -260.35)):
            Circle(HOLE2_OUTLINE_R)
        with Locations((-130.175, -209.55)):
            Circle(HOLE2_OUTLINE_R)
    extrude(amount=HOLE2_DEPTH, mode=Mode.SUBTRACT)

    # Split1: read off the stored shape, not the designer's step
    # Split1 outline → Split1 (cut)
    with BuildSketch(Plane.XY.offset(SPLIT1_START)):
        with BuildLine():
            Line((69.85, -196.088), (-69.85, -196.088))
            ThreePointArc((-69.85, -196.088), (-87.271696875, -188.871696875), (-94.488, -171.45))
            Line((-94.488, -171.45), (-94.488, -123.825))
            Line((-94.488, -123.825), (-95.25, -123.825))
            Line((-95.25, -123.825), (-95.25, -171.45))
            ThreePointArc((-95.25, -171.45), (-87.810512242, -189.410512242), (-69.85, -196.85))
            Line((-69.85, -196.85), (69.85, -196.85))
            ThreePointArc((69.85, -196.85), (87.810512242, -189.410512242), (95.25, -171.45))
            Line((95.25, -171.45), (95.25, -123.825))
            Line((95.25, -123.825), (94.488, -123.825))
            Line((94.488, -123.825), (94.488, -171.45))
            ThreePointArc((94.488, -171.45), (87.271696875, -188.871696875), (69.85, -196.088))
        make_face()
    extrude(amount=SPLIT1_DEPTH, mode=Mode.SUBTRACT)

    # Split1 2 outline → Split1 2 (cut)
    with BuildSketch(Plane.XY.offset(SPLIT1_START_2)):
        with BuildLine():
            Line((69.85, -196.088), (63.5, -196.088))
            Line((63.5, -196.088), (63.5, -196.85))
            Line((63.5, -196.85), (69.85, -196.85))
            ThreePointArc((69.85, -196.85), (87.810512242, -189.410512242), (95.25, -171.45))
            Line((95.25, -171.45), (95.25, -123.825))
            Line((95.25, -123.825), (94.488, -123.825))
            Line((94.488, -123.825), (94.488, -171.45))
            ThreePointArc((94.488, -171.45), (87.271696875, -188.871696875), (69.85, -196.088))
        make_face()
        with BuildLine():
            Line((-63.5, -196.85), (-63.5, -196.088))
            Line((-63.5, -196.088), (-69.85, -196.088))
            ThreePointArc((-69.85, -196.088), (-87.271696875, -188.871696875), (-94.488, -171.45))
            Line((-94.488, -171.45), (-94.488, -123.825))
            Line((-94.488, -123.825), (-95.25, -123.825))
            Line((-95.25, -123.825), (-95.25, -171.45))
            ThreePointArc((-95.25, -171.45), (-87.810512242, -189.410512242), (-69.85, -196.85))
            Line((-69.85, -196.85), (-63.5, -196.85))
        make_face()
    extrude(amount=SPLIT1_2_DEPTH, mode=Mode.SUBTRACT)

    # Split1 3 outline → Split1 3 (cut)
    with BuildSketch(Plane.XY.offset(SPLIT1_START_2)):
        with Locations((0, -196.469)):
            Rectangle(SPLIT1_3_OUTLINE_W, SPLIT1_3_OUTLINE_H)
    extrude(amount=SPLIT1_3_DEPTH, mode=Mode.SUBTRACT)


with BuildPart() as body_12:
    # Base-Flange3: sheet metal written as solids
    # Sketch13 → Base-Flange3 (new body)
    with BuildSketch(Plane.XY.offset(-196.85)):
        with Locations((-94.869, -92.075)):
            Rectangle(SKETCH13_W, SKETCH13_H)
    extrude(amount=-BASE_FLANGE3_DEPTH)


with BuildPart() as f_6_32_tapped_hole2_tool:
    # Sketch26 → #6-32 Tapped Hole2 (revolve)
    with BuildSketch(Plane(origin=(88.9, -130.175, -209.55), x_dir=(0, 0, -1), z_dir=(0, 1, 0))):
        with Locations((0.676275, 92.075)):
            Rectangle(SKETCH26_W, SKETCH26_H)
    f_6_32_tapped_hole2 = revolve(axis=Axis((95.25, -130.175, -209.55), (-1, 0, 0)))


with BuildPart() as part_1:
    add(part.part)

    # #6-32 Tapped Hole2: cut by f_6_32_tapped_hole2_tool
    add(f_6_32_tapped_hole2_tool.part, mode=Mode.SUBTRACT)


with BuildPart() as body_2_1:
    add(body_2.part)

    # #6-32 Tapped Hole2: cut by f_6_32_tapped_hole2_tool
    add(f_6_32_tapped_hole2_tool.part, mode=Mode.SUBTRACT)


with BuildPart() as f_6_32_tapped_hole2_at_2_tool:
    # #6-32 Tapped Hole2 at 2: #6-32 Tapped Hole2 ×2
    with Locations(*[(0, 0, -i * F_6_32_TAPPED_HOLE2_AT_2_PITCH) for i in range(1, F_6_32_TAPPED_HOLE2_AT_2_COUNT)]):
        add(f_6_32_tapped_hole2)


with BuildPart() as part_2:
    add(part_1.part)

    # #6-32 Tapped Hole2 at 2: cut by f_6_32_tapped_hole2_at_2_tool
    add(f_6_32_tapped_hole2_at_2_tool.part, mode=Mode.SUBTRACT)


with BuildPart() as body_2_2:
    add(body_2_1.part)

    # #6-32 Tapped Hole2 at 2: cut by f_6_32_tapped_hole2_at_2_tool
    add(f_6_32_tapped_hole2_at_2_tool.part, mode=Mode.SUBTRACT)


with BuildPart() as f_6_32_tapped_hole2_at_3_tool:
    # #6-32 Tapped Hole2 at 3: #6-32 Tapped Hole2 ×2
    with Locations(*[(0, 0, -i * F_6_32_TAPPED_HOLE2_AT_3_PITCH) for i in range(1, F_6_32_TAPPED_HOLE2_AT_3_COUNT)]):
        add(f_6_32_tapped_hole2)


with BuildPart() as part_3:
    add(part_2.part)

    # #6-32 Tapped Hole2 at 3: cut by f_6_32_tapped_hole2_at_3_tool
    add(f_6_32_tapped_hole2_at_3_tool.part, mode=Mode.SUBTRACT)


with BuildPart() as body_2_3:
    add(body_2_2.part)

    # #6-32 Tapped Hole2 at 3: cut by f_6_32_tapped_hole2_at_3_tool
    add(f_6_32_tapped_hole2_at_3_tool.part, mode=Mode.SUBTRACT)


with BuildPart() as f_6_32_tapped_hole2_at_4_tool:
    # #6-32 Tapped Hole2 at 4: #6-32 Tapped Hole2 ×2
    with Locations(*[(0, 0, -i * F_6_32_TAPPED_HOLE2_AT_4_PITCH) for i in range(1, F_6_32_TAPPED_HOLE2_AT_4_COUNT)]):
        add(f_6_32_tapped_hole2)


with BuildPart() as part_4:
    add(part_3.part)

    # #6-32 Tapped Hole2 at 4: cut by f_6_32_tapped_hole2_at_4_tool
    add(f_6_32_tapped_hole2_at_4_tool.part, mode=Mode.SUBTRACT)


with BuildPart() as body_2_4:
    add(body_2_3.part)

    # #6-32 Tapped Hole2 at 4: cut by f_6_32_tapped_hole2_at_4_tool
    add(f_6_32_tapped_hole2_at_4_tool.part, mode=Mode.SUBTRACT)


with BuildPart() as f_6_32_tapped_hole2_at_5_tool:
    # #6-32 Tapped Hole2 at 5: #6-32 Tapped Hole2 ×2
    with Locations(*[(0, 0, -i * F_6_32_TAPPED_HOLE2_AT_5_PITCH) for i in range(1, F_6_32_TAPPED_HOLE2_AT_5_COUNT)]):
        add(f_6_32_tapped_hole2)


with BuildPart() as part_5:
    add(part_4.part)

    # #6-32 Tapped Hole2 at 5: cut by f_6_32_tapped_hole2_at_5_tool
    add(f_6_32_tapped_hole2_at_5_tool.part, mode=Mode.SUBTRACT)


with BuildPart() as body_2_5:
    add(body_2_4.part)

    # #6-32 Tapped Hole2 at 5: cut by f_6_32_tapped_hole2_at_5_tool
    add(f_6_32_tapped_hole2_at_5_tool.part, mode=Mode.SUBTRACT)


with BuildPart() as f_6_32_tapped_hole2_at_6_tool:
    # #6-32 Tapped Hole2 at 6: #6-32 Tapped Hole2 ×2
    with Locations(*[(0, 0, -i * F_6_32_TAPPED_HOLE2_AT_6_PITCH) for i in range(1, F_6_32_TAPPED_HOLE2_AT_6_COUNT)]):
        add(f_6_32_tapped_hole2)


with BuildPart() as part_6:
    add(part_5.part)

    # #6-32 Tapped Hole2 at 6: cut by f_6_32_tapped_hole2_at_6_tool
    add(f_6_32_tapped_hole2_at_6_tool.part, mode=Mode.SUBTRACT)


with BuildPart() as body_2_6:
    add(body_2_5.part)

    # #6-32 Tapped Hole2 at 6: cut by f_6_32_tapped_hole2_at_6_tool
    add(f_6_32_tapped_hole2_at_6_tool.part, mode=Mode.SUBTRACT)


with BuildPart() as f_6_32_tapped_hole2_at_7_tool:
    # #6-32 Tapped Hole2 at 7: #6-32 Tapped Hole2 ×2
    with Locations(*[(0, 0, -i * F_6_32_TAPPED_HOLE2_AT_7_PITCH) for i in range(1, F_6_32_TAPPED_HOLE2_AT_7_COUNT)]):
        add(f_6_32_tapped_hole2)


with BuildPart() as part_7:
    add(part_6.part)

    # #6-32 Tapped Hole2 at 7: cut by f_6_32_tapped_hole2_at_7_tool
    add(f_6_32_tapped_hole2_at_7_tool.part, mode=Mode.SUBTRACT)


with BuildPart() as body_2_7:
    add(body_2_6.part)

    # #6-32 Tapped Hole2 at 7: cut by f_6_32_tapped_hole2_at_7_tool
    add(f_6_32_tapped_hole2_at_7_tool.part, mode=Mode.SUBTRACT)


with BuildPart() as f_6_32_tapped_hole2_at_8_tool:
    # #6-32 Tapped Hole2 at 8: #6-32 Tapped Hole2 ×2
    with Locations(*[(0, 0, -i * F_6_32_TAPPED_HOLE2_AT_8_PITCH) for i in range(1, F_6_32_TAPPED_HOLE2_AT_8_COUNT)]):
        add(f_6_32_tapped_hole2)


with BuildPart() as part_8:
    add(part_7.part)

    # #6-32 Tapped Hole2 at 8: cut by f_6_32_tapped_hole2_at_8_tool
    add(f_6_32_tapped_hole2_at_8_tool.part, mode=Mode.SUBTRACT)


with BuildPart() as body_2_8:
    add(body_2_7.part)

    # #6-32 Tapped Hole2 at 8: cut by f_6_32_tapped_hole2_at_8_tool
    add(f_6_32_tapped_hole2_at_8_tool.part, mode=Mode.SUBTRACT)


with BuildPart() as f_6_32_tapped_hole2_at_9_tool:
    # #6-32 Tapped Hole2 at 9: #6-32 Tapped Hole2 ×2
    with Locations(*[(0, 0, -i * F_6_32_TAPPED_HOLE2_AT_9_PITCH) for i in range(1, F_6_32_TAPPED_HOLE2_AT_9_COUNT)]):
        add(f_6_32_tapped_hole2)


with BuildPart() as part_9:
    add(part_8.part)

    # #6-32 Tapped Hole2 at 9: cut by f_6_32_tapped_hole2_at_9_tool
    add(f_6_32_tapped_hole2_at_9_tool.part, mode=Mode.SUBTRACT)


with BuildPart() as body_2_9:
    add(body_2_8.part)

    # #6-32 Tapped Hole2 at 9: cut by f_6_32_tapped_hole2_at_9_tool
    add(f_6_32_tapped_hole2_at_9_tool.part, mode=Mode.SUBTRACT)


with BuildPart() as f_6_32_tapped_hole2_at_10_tool:
    # #6-32 Tapped Hole2 at 10: #6-32 Tapped Hole2 ×2
    with Locations(*[(0, 0, -i * F_6_32_TAPPED_HOLE2_AT_10_PITCH) for i in range(1, F_6_32_TAPPED_HOLE2_AT_10_COUNT)]):
        add(f_6_32_tapped_hole2)


with BuildPart() as part_10:
    add(part_9.part)

    # #6-32 Tapped Hole2 at 10: cut by f_6_32_tapped_hole2_at_10_tool
    add(f_6_32_tapped_hole2_at_10_tool.part, mode=Mode.SUBTRACT)

    # Sketch21 → #6-32 Tapped Hole3 (revolve, cut)
    with BuildSketch(Plane(origin=(76.2, -111.125, -222.25), x_dir=(0, 0, 1), z_dir=(1, 0, 0))):
        with Locations((0.676275, 1.588)):
            Rectangle(SKETCH21_W, SKETCH21_H)
    f_6_32_tapped_hole3 = revolve(axis=Axis((76.2, -104.775, -222.25), (0, -1, 0)), mode=Mode.SUBTRACT)

    # #6-32 Tapped Hole3 at 2: #6-32 Tapped Hole3 ×2
    with Locations(*[(0, 0, -i * F_6_32_TAPPED_HOLE3_AT_2_PITCH) for i in range(1, F_6_32_TAPPED_HOLE3_AT_2_COUNT)]):
        add(f_6_32_tapped_hole3, mode=Mode.SUBTRACT)

    # #6-32 Tapped Hole3 at 3: #6-32 Tapped Hole3 ×2
    with Locations(*[(0, 0, -i * F_6_32_TAPPED_HOLE3_AT_3_PITCH) for i in range(1, F_6_32_TAPPED_HOLE3_AT_3_COUNT)]):
        add(f_6_32_tapped_hole3, mode=Mode.SUBTRACT)

    # #6-32 Tapped Hole3 at 4: #6-32 Tapped Hole3 ×2
    with Locations(*[(0, 0, -i * F_6_32_TAPPED_HOLE3_AT_4_PITCH) for i in range(1, F_6_32_TAPPED_HOLE3_AT_4_COUNT)]):
        add(f_6_32_tapped_hole3, mode=Mode.SUBTRACT)

    # #6-32 Tapped Hole3 at 5: #6-32 Tapped Hole3 ×2
    with Locations(*[(0, 0, -i * F_6_32_TAPPED_HOLE3_AT_5_PITCH) for i in range(1, F_6_32_TAPPED_HOLE3_AT_5_COUNT)]):
        add(f_6_32_tapped_hole3, mode=Mode.SUBTRACT)

    # #6-32 Tapped Hole3 at 6: #6-32 Tapped Hole3 ×2
    with Locations(*[(0, 0, -i * F_6_32_TAPPED_HOLE3_AT_6_PITCH) for i in range(1, F_6_32_TAPPED_HOLE3_AT_6_COUNT)]):
        add(f_6_32_tapped_hole3, mode=Mode.SUBTRACT)

    # #6-32 Tapped Hole3 at 7: #6-32 Tapped Hole3 ×2
    with Locations(*[(0, 0, -i * F_6_32_TAPPED_HOLE3_AT_7_PITCH) for i in range(1, F_6_32_TAPPED_HOLE3_AT_7_COUNT)]):
        add(f_6_32_tapped_hole3, mode=Mode.SUBTRACT)

    # #6-32 Tapped Hole3 at 8: #6-32 Tapped Hole3 ×2
    with Locations(*[(0, 0, -i * F_6_32_TAPPED_HOLE3_AT_8_PITCH) for i in range(1, F_6_32_TAPPED_HOLE3_AT_8_COUNT)]):
        add(f_6_32_tapped_hole3, mode=Mode.SUBTRACT)

    # #6-32 Tapped Hole3 at 9: #6-32 Tapped Hole3 ×2
    with Locations(*[(0, 0, -i * F_6_32_TAPPED_HOLE3_AT_9_PITCH) for i in range(1, F_6_32_TAPPED_HOLE3_AT_9_COUNT)]):
        add(f_6_32_tapped_hole3, mode=Mode.SUBTRACT)

    # #6-32 Tapped Hole3 at 10: #6-32 Tapped Hole3 ×2
    with Locations(*[(0, 0, -i * F_6_32_TAPPED_HOLE3_AT_10_PITCH) for i in range(1, F_6_32_TAPPED_HOLE3_AT_10_COUNT)]):
        add(f_6_32_tapped_hole3, mode=Mode.SUBTRACT)

    # #6-32 Tapped Hole3 at 11: #6-32 Tapped Hole3 ×2
    with Locations(*[(0, 0, -i * F_6_32_TAPPED_HOLE3_AT_11_PITCH) for i in range(1, F_6_32_TAPPED_HOLE3_AT_11_COUNT)]):
        add(f_6_32_tapped_hole3, mode=Mode.SUBTRACT)

    # #6-32 Tapped Hole3 at 12: #6-32 Tapped Hole3 ×2
    with Locations(*[(0, 0, -i * F_6_32_TAPPED_HOLE3_AT_12_PITCH) for i in range(1, F_6_32_TAPPED_HOLE3_AT_12_COUNT)]):
        add(f_6_32_tapped_hole3, mode=Mode.SUBTRACT)

    # #6-32 Tapped Hole3 at 13: #6-32 Tapped Hole3 ×2
    with Locations(*[(0, 0, -i * F_6_32_TAPPED_HOLE3_AT_13_PITCH) for i in range(1, F_6_32_TAPPED_HOLE3_AT_13_COUNT)]):
        add(f_6_32_tapped_hole3, mode=Mode.SUBTRACT)

    # #6-32 Tapped Hole3 at 14: #6-32 Tapped Hole3 ×2
    with Locations(*[(0, 0, -i * F_6_32_TAPPED_HOLE3_AT_14_PITCH) for i in range(1, F_6_32_TAPPED_HOLE3_AT_14_COUNT)]):
        add(f_6_32_tapped_hole3, mode=Mode.SUBTRACT)

    # #6-32 Tapped Hole3 at 15: #6-32 Tapped Hole3 ×2
    with Locations(*[(0, 0, -i * F_6_32_TAPPED_HOLE3_AT_15_PITCH) for i in range(1, F_6_32_TAPPED_HOLE3_AT_15_COUNT)]):
        add(f_6_32_tapped_hole3, mode=Mode.SUBTRACT)

    # #6-32 Tapped Hole3 at 16: #6-32 Tapped Hole3 ×2
    with Locations(*[(0, 0, -i * F_6_32_TAPPED_HOLE3_AT_16_PITCH) for i in range(1, F_6_32_TAPPED_HOLE3_AT_16_COUNT)]):
        add(f_6_32_tapped_hole3, mode=Mode.SUBTRACT)

    # #6-32 Tapped Hole3 at 17: #6-32 Tapped Hole3 ×2
    with Locations(*[(0, 0, -i * F_6_32_TAPPED_HOLE3_AT_17_PITCH) for i in range(1, F_6_32_TAPPED_HOLE3_AT_17_COUNT)]):
        add(f_6_32_tapped_hole3, mode=Mode.SUBTRACT)


with BuildPart() as body_2_10:
    add(body_2_9.part)

    # #6-32 Tapped Hole2 at 10: cut by f_6_32_tapped_hole2_at_10_tool
    add(f_6_32_tapped_hole2_at_10_tool.part, mode=Mode.SUBTRACT)

    # Mirror1: #6-32 Tapped Hole3 across plane
    add(f_6_32_tapped_hole3.mirror(Plane(origin=(0, 0, 0), x_dir=(0, 0, 1), z_dir=(1, 0, 0))), mode=Mode.SUBTRACT)

    # Mirror1 copy 1 sketch → Mirror1 copy 1 (revolve, cut)
    with BuildSketch(Plane(origin=(-76.2, -111.125, -247.65), x_dir=(0, 0, 1), z_dir=(-1, 0, 0))):
        with Locations((0.676275, -1.588)):
            Rectangle(MIRROR1_COPY_1_SKETCH_W, MIRROR1_COPY_1_SKETCH_H)
    revolve(axis=Axis((-76.2, -104.775, -247.65), (0, 1, 0)), mode=Mode.SUBTRACT)

    # Mirror1 copy 2 sketch → Mirror1 copy 2 (revolve, cut)
    with BuildSketch(Plane(origin=(-76.2, -111.125, -273.05), x_dir=(0, 0, 1), z_dir=(-1, 0, 0))):
        with Locations((0.676275, -1.588)):
            Rectangle(MIRROR1_COPY_2_SKETCH_W, MIRROR1_COPY_2_SKETCH_H)
    revolve(axis=Axis((-76.2, -104.775, -273.05), (0, 1, 0)), mode=Mode.SUBTRACT)

    # Mirror1 copy 3 sketch → Mirror1 copy 3 (revolve, cut)
    with BuildSketch(Plane(origin=(-76.2, -111.125, -298.45), x_dir=(0, 0, 1), z_dir=(-1, 0, 0))):
        with Locations((0.676275, -1.588)):
            Rectangle(MIRROR1_COPY_3_SKETCH_W, MIRROR1_COPY_3_SKETCH_H)
    revolve(axis=Axis((-76.2, -104.775, -298.45), (0, 1, 0)), mode=Mode.SUBTRACT)

    # Mirror1 copy 4 sketch → Mirror1 copy 4 (revolve, cut)
    with BuildSketch(Plane(origin=(-76.2, -111.125, -323.85), x_dir=(0, 0, 1), z_dir=(-1, 0, 0))):
        with Locations((0.676275, -1.588)):
            Rectangle(MIRROR1_COPY_4_SKETCH_W, MIRROR1_COPY_4_SKETCH_H)
    revolve(axis=Axis((-76.2, -104.775, -323.85), (0, 1, 0)), mode=Mode.SUBTRACT)

    # Mirror1 copy 5 sketch → Mirror1 copy 5 (revolve, cut)
    with BuildSketch(Plane(origin=(-76.2, -111.125, -349.25), x_dir=(0, 0, 1), z_dir=(-1, 0, 0))):
        with Locations((0.676275, -1.588)):
            Rectangle(MIRROR1_COPY_5_SKETCH_W, MIRROR1_COPY_5_SKETCH_H)
    revolve(axis=Axis((-76.2, -104.775, -349.25), (0, 1, 0)), mode=Mode.SUBTRACT)

    # Mirror1 copy 6 sketch → Mirror1 copy 6 (revolve, cut)
    with BuildSketch(Plane(origin=(-76.2, -111.125, -425.45), x_dir=(0, 0, 1), z_dir=(-1, 0, 0))):
        with Locations((0.676275, -1.588)):
            Rectangle(MIRROR1_COPY_6_SKETCH_W, MIRROR1_COPY_6_SKETCH_H)
    revolve(axis=Axis((-76.2, -104.775, -425.45), (0, 1, 0)), mode=Mode.SUBTRACT)

    # Mirror1 copy 7 sketch → Mirror1 copy 7 (revolve, cut)
    with BuildSketch(Plane(origin=(-76.2, -111.125, -374.65), x_dir=(0, 0, 1), z_dir=(-1, 0, 0))):
        with Locations((0.676275, -1.588)):
            Rectangle(MIRROR1_COPY_7_SKETCH_W, MIRROR1_COPY_7_SKETCH_H)
    revolve(axis=Axis((-76.2, -104.775, -374.65), (0, 1, 0)), mode=Mode.SUBTRACT)

    # Mirror1 copy 8 sketch → Mirror1 copy 8 (revolve, cut)
    with BuildSketch(Plane(origin=(-76.2, -111.125, -400.05), x_dir=(0, 0, 1), z_dir=(-1, 0, 0))):
        with Locations((0.676275, -1.588)):
            Rectangle(MIRROR1_COPY_8_SKETCH_W, MIRROR1_COPY_8_SKETCH_H)
    revolve(axis=Axis((-76.2, -104.775, -400.05), (0, 1, 0)), mode=Mode.SUBTRACT)

    # Mirror1 copy 9 sketch → Mirror1 copy 9 (revolve, cut)
    with BuildSketch(Plane(origin=(-76.2, -111.125, -476.25), x_dir=(0, 0, 1), z_dir=(-1, 0, 0))):
        with Locations((0.676275, -1.588)):
            Rectangle(MIRROR1_COPY_9_SKETCH_W, MIRROR1_COPY_9_SKETCH_H)
    revolve(axis=Axis((-76.2, -104.775, -476.25), (0, 1, 0)), mode=Mode.SUBTRACT)

    # Mirror1 copy 10 sketch → Mirror1 copy 10 (revolve, cut)
    with BuildSketch(Plane(origin=(-76.2, -111.125, -501.65), x_dir=(0, 0, 1), z_dir=(-1, 0, 0))):
        with Locations((0.676275, -1.588)):
            Rectangle(MIRROR1_COPY_10_SKETCH_W, MIRROR1_COPY_10_SKETCH_H)
    revolve(axis=Axis((-76.2, -104.775, -501.65), (0, 1, 0)), mode=Mode.SUBTRACT)

    # Mirror1 copy 11 sketch → Mirror1 copy 11 (revolve, cut)
    with BuildSketch(Plane(origin=(-76.2, -111.125, -527.05), x_dir=(0, 0, 1), z_dir=(-1, 0, 0))):
        with Locations((0.676275, -1.588)):
            Rectangle(MIRROR1_COPY_11_SKETCH_W, MIRROR1_COPY_11_SKETCH_H)
    revolve(axis=Axis((-76.2, -104.775, -527.05), (0, 1, 0)), mode=Mode.SUBTRACT)

    # Mirror1 copy 12 sketch → Mirror1 copy 12 (revolve, cut)
    with BuildSketch(Plane(origin=(-76.2, -111.125, -552.45), x_dir=(0, 0, 1), z_dir=(-1, 0, 0))):
        with Locations((0.676275, -1.588)):
            Rectangle(MIRROR1_COPY_12_SKETCH_W, MIRROR1_COPY_12_SKETCH_H)
    revolve(axis=Axis((-76.2, -104.775, -552.45), (0, 1, 0)), mode=Mode.SUBTRACT)

    # Mirror1 copy 13 sketch → Mirror1 copy 13 (revolve, cut)
    with BuildSketch(Plane(origin=(-76.2, -111.125, -577.85), x_dir=(0, 0, 1), z_dir=(-1, 0, 0))):
        with Locations((0.676275, -1.588)):
            Rectangle(MIRROR1_COPY_13_SKETCH_W, MIRROR1_COPY_13_SKETCH_H)
    revolve(axis=Axis((-76.2, -104.775, -577.85), (0, 1, 0)), mode=Mode.SUBTRACT)

    # Mirror1 copy 14 sketch → Mirror1 copy 14 (revolve, cut)
    with BuildSketch(Plane(origin=(-76.2, -111.125, -603.25), x_dir=(0, 0, 1), z_dir=(-1, 0, 0))):
        with Locations((0.676275, -1.588)):
            Rectangle(MIRROR1_COPY_14_SKETCH_W, MIRROR1_COPY_14_SKETCH_H)
    revolve(axis=Axis((-76.2, -104.775, -603.25), (0, 1, 0)), mode=Mode.SUBTRACT)

    # Mirror1 copy 15 sketch → Mirror1 copy 15 (revolve, cut)
    with BuildSketch(Plane(origin=(-76.2, -111.125, -628.65), x_dir=(0, 0, 1), z_dir=(-1, 0, 0))):
        with Locations((0.676275, -1.588)):
            Rectangle(MIRROR1_COPY_15_SKETCH_W, MIRROR1_COPY_15_SKETCH_H)
    revolve(axis=Axis((-76.2, -104.775, -628.65), (0, 1, 0)), mode=Mode.SUBTRACT)

    # Mirror1 copy 16 sketch → Mirror1 copy 16 (revolve, cut)
    with BuildSketch(Plane(origin=(-76.2, -111.125, -654.05), x_dir=(0, 0, 1), z_dir=(-1, 0, 0))):
        with Locations((0.676275, -1.588)):
            Rectangle(MIRROR1_COPY_16_SKETCH_W, MIRROR1_COPY_16_SKETCH_H)
    revolve(axis=Axis((-76.2, -104.775, -654.05), (0, 1, 0)), mode=Mode.SUBTRACT)


with BuildPart() as body_13:
    # Sketch9 → Nosecone Base (with draft: the straight prism first)
    with BuildSketch(Plane.XY.offset(-196.85)):
        with BuildLine():
            Line((69.85, 0), (-69.85, 0))
            ThreePointArc((-69.85, 0), (-87.810512242, -7.439487758), (-95.25, -25.4))
            Line((-95.25, -25.4), (-95.25, -171.45))
            ThreePointArc((-95.25, -171.45), (-87.810512242, -189.410512242), (-69.85, -196.85))
            Line((-69.85, -196.85), (69.85, -196.85))
            ThreePointArc((69.85, -196.85), (87.810512242, -189.410512242), (95.25, -171.45))
            Line((95.25, -171.45), (95.25, -25.4))
            ThreePointArc((95.25, -25.4), (87.810512242, -7.439487758), (69.85, 0))
        make_face()
        with Locations((-19.05, -12.7)):
            Circle(SKETCH9_R, mode=Mode.SUBTRACT)
        with Locations((19.05, -12.7)):
            Circle(SKETCH9_R, mode=Mode.SUBTRACT)
    extrude(amount=NOSECONE_BASE_DEPTH)
    # Nosecone Base: the draft: its side faces are tilted about the plane it starts from
    nosecone_base_sides = [body_13.faces().sort_by_distance(p)[0] for p in [
        (95.25, -98.425, -195.2625),
        (87.810512242, -7.439487758, -195.2625),
        (0, 0, -195.2625),
        (-87.810512242, -7.439487758, -195.2625),
        (-95.25, -98.425, -195.2625),
        (-87.810512242, -189.410512242, -195.2625),
        (0, -196.85, -195.2625),
        (87.810512242, -189.410512242, -195.2625),
        (-20.6375, -12.7, -195.2625),
        (17.4625, -12.7, -195.2625),
    ]]
    draft(nosecone_base_sides, Plane.XY.offset(-196.85), NOSECONE_BASE_DRAFT)


solid = body_11.part
